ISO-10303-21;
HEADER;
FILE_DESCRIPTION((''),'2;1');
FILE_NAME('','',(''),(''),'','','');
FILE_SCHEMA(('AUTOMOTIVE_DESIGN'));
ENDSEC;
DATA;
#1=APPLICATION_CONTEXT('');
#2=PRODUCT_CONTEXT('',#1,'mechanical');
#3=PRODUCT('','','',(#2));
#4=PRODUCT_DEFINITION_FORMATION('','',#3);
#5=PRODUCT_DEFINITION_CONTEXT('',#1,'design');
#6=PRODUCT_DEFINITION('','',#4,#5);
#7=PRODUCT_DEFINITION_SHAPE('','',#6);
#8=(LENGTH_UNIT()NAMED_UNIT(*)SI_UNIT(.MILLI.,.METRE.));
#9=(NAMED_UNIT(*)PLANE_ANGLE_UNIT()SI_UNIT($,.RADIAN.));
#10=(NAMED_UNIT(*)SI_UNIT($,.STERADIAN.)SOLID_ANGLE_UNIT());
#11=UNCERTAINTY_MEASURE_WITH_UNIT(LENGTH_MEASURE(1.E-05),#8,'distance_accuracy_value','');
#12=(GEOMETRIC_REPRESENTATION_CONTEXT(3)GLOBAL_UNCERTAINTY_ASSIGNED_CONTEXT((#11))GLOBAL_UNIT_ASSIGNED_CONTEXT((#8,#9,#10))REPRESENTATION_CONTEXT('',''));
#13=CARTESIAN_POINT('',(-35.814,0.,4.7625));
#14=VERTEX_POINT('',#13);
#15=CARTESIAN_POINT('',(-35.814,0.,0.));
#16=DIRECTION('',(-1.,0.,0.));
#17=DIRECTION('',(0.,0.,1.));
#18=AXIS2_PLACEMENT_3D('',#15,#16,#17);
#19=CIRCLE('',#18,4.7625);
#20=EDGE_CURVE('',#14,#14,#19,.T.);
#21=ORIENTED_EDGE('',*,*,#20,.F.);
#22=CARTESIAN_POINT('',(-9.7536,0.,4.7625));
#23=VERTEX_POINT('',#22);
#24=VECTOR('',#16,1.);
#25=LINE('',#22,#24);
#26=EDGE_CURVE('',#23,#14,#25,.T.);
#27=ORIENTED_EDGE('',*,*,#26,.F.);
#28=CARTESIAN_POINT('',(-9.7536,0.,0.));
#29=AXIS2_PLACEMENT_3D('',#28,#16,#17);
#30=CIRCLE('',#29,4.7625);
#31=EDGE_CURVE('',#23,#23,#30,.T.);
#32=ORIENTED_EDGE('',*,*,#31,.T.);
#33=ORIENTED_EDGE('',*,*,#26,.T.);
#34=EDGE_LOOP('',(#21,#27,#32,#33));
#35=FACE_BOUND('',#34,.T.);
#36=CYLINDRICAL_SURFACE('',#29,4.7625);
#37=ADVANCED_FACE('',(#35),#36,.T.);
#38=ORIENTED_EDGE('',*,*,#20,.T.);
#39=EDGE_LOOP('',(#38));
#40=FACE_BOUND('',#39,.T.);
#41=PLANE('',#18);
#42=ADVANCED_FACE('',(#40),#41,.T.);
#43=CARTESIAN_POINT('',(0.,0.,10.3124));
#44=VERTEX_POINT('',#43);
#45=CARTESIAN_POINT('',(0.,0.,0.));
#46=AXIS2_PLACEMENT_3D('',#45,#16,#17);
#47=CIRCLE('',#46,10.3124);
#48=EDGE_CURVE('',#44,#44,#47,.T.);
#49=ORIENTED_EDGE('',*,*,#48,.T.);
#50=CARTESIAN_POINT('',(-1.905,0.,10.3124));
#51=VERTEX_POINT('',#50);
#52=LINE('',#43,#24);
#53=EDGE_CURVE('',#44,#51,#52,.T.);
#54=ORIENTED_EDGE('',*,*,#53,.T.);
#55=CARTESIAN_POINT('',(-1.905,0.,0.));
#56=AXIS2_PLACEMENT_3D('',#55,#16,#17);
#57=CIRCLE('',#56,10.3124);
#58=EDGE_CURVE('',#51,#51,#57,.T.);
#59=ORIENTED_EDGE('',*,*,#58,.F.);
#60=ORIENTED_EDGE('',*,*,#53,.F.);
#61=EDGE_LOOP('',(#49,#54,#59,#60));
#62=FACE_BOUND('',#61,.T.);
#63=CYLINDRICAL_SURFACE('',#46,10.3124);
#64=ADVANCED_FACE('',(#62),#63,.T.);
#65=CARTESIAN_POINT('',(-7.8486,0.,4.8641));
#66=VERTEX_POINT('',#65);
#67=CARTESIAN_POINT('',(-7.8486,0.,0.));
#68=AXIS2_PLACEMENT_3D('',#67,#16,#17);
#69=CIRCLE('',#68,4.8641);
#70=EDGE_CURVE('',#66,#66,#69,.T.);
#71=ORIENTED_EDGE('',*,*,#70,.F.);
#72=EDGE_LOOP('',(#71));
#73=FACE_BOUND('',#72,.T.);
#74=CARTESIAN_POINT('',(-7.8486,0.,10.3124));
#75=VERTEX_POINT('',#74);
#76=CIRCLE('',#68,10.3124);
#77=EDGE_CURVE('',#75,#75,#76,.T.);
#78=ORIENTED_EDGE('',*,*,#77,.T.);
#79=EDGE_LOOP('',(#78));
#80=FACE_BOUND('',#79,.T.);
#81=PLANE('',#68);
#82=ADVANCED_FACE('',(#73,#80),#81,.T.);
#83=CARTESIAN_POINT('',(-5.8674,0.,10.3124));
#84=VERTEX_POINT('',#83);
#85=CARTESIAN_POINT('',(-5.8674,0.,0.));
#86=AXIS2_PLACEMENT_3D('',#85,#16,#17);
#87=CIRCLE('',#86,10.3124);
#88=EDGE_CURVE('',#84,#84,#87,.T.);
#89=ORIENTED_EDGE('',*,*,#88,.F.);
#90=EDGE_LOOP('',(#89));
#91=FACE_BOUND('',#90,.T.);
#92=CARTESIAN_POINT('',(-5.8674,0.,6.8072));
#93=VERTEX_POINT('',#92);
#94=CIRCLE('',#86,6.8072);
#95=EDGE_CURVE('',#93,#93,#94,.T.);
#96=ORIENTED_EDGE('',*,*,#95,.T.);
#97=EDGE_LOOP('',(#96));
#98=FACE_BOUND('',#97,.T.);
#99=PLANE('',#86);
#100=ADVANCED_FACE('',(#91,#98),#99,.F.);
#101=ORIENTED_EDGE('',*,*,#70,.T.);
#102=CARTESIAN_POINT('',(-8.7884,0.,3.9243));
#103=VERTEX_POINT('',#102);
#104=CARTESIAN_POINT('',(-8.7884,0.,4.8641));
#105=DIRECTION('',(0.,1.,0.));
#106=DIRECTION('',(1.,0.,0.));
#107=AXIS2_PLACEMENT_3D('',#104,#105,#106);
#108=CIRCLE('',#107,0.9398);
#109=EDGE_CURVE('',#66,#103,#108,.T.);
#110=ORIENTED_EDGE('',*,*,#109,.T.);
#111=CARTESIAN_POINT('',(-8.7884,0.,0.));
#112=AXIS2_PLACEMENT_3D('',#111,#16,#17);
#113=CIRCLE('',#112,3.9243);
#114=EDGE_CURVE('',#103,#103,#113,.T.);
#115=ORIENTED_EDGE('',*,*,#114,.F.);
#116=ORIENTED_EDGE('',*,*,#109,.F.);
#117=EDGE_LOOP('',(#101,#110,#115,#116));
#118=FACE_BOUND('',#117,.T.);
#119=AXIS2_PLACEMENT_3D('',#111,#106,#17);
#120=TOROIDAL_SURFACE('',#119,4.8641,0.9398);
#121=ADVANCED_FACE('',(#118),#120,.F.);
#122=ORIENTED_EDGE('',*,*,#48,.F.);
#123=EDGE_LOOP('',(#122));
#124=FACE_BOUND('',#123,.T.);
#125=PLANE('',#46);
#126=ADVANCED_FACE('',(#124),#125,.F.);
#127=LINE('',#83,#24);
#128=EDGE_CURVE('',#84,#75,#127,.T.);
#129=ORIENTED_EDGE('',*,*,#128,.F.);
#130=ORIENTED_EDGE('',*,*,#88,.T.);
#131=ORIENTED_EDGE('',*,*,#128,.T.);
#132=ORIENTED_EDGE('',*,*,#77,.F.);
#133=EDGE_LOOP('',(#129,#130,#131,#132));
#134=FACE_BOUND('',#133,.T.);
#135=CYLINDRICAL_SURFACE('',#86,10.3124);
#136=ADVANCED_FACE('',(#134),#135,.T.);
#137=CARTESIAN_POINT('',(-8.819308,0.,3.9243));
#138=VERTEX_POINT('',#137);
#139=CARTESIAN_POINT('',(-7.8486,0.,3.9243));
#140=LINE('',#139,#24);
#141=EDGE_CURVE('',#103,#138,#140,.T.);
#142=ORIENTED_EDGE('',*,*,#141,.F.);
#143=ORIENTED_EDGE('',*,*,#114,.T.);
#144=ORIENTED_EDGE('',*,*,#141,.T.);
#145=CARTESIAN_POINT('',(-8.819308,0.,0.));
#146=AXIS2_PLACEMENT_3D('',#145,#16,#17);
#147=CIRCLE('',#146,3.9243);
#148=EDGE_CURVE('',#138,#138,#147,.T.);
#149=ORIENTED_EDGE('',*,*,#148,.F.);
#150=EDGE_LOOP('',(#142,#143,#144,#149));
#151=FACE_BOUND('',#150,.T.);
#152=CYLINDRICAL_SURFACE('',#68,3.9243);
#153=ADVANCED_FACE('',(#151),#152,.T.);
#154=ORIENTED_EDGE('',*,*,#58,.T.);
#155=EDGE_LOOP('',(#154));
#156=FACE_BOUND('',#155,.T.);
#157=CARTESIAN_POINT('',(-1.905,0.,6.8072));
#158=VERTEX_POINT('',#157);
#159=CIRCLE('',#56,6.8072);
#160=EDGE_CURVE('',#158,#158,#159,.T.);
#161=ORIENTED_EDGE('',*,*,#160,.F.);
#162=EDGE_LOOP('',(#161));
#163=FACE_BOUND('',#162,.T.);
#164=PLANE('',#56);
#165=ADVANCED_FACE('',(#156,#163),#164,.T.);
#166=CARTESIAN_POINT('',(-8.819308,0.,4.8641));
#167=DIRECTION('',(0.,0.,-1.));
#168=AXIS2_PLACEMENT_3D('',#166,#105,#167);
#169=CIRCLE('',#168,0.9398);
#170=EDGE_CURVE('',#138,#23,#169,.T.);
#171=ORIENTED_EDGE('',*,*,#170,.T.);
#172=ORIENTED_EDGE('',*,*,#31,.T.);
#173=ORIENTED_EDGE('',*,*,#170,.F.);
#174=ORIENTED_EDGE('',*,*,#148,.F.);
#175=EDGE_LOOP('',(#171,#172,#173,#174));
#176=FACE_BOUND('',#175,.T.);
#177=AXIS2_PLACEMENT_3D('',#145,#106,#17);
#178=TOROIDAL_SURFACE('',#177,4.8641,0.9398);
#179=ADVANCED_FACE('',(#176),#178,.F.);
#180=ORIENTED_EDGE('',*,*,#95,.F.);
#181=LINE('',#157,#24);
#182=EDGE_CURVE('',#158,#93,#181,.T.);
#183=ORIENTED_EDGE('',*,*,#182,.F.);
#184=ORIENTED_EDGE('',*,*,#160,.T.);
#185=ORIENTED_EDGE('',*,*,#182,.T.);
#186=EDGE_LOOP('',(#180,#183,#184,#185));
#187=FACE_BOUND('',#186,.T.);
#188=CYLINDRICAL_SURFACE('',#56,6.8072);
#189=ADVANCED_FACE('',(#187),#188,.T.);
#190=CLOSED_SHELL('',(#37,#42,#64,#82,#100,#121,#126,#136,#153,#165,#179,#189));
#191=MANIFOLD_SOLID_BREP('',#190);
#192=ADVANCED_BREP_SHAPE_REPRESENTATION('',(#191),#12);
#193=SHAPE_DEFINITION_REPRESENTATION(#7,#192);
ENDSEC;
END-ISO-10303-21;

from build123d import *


# Not quite as in the source:
# - a fillet or chamfer that OpenCascade refuses, or shapes differently, is made with other operations: its cross-section is extruded or revolved along the edge and cut away or added


with BuildPart() as f1:
    # F0 (on Front) → F1 (revolve)
    with BuildSketch(Plane.XZ):
        Polygon((-35.814, 0), (0, 0), (0, 10.3124), (-1.905, 10.3124), (-1.905, 6.8072), (-5.8674, 6.8072), (-5.8674, 10.3124), (-7.8486, 10.3124), (-7.8486, 3.9243), (-9.7536, 3.9243), (-9.7536, 4.7625), (-35.814, 4.7625), align=None)
    revolve(axis=Axis((-27.8073139489, 0, 0), (-1, 0, 0)))

    # F2: fillet of radius 0.9398 on 2 edges, made by hand

    # F2_s1 → F2_t2 (revolve)
    with BuildSketch(Plane.XZ):
        with BuildLine():
            ThreePointArc((-7.8486, 4.8641), (-8.123861047, 4.199561047), (-8.7884, 3.9243))
            Line((-8.7884, 3.9243), (-7.8486, 3.9243))
            Line((-7.8486, 3.9243), (-7.8486, 4.8641))
        make_face()
    revolve(axis=Axis((-7.8486, 0, 0), (-1, 0, 0)))

    # F2_s3 → F2_t4 (revolve)
    with BuildSketch(Plane.XZ):
        with BuildLine():
            ThreePointArc((-8.8193080328, 3.9243), (-9.4468988071, 4.1645616808), (-9.7536, 4.7625))
            Line((-9.7536, 4.7625), (-9.7536, 3.9243))
            Line((-9.7536, 3.9243), (-8.8193080328, 3.9243))
        make_face()
    revolve(axis=Axis((-9.7536, 0, 0), (-1, 0, 0)))


solid = f1.part
